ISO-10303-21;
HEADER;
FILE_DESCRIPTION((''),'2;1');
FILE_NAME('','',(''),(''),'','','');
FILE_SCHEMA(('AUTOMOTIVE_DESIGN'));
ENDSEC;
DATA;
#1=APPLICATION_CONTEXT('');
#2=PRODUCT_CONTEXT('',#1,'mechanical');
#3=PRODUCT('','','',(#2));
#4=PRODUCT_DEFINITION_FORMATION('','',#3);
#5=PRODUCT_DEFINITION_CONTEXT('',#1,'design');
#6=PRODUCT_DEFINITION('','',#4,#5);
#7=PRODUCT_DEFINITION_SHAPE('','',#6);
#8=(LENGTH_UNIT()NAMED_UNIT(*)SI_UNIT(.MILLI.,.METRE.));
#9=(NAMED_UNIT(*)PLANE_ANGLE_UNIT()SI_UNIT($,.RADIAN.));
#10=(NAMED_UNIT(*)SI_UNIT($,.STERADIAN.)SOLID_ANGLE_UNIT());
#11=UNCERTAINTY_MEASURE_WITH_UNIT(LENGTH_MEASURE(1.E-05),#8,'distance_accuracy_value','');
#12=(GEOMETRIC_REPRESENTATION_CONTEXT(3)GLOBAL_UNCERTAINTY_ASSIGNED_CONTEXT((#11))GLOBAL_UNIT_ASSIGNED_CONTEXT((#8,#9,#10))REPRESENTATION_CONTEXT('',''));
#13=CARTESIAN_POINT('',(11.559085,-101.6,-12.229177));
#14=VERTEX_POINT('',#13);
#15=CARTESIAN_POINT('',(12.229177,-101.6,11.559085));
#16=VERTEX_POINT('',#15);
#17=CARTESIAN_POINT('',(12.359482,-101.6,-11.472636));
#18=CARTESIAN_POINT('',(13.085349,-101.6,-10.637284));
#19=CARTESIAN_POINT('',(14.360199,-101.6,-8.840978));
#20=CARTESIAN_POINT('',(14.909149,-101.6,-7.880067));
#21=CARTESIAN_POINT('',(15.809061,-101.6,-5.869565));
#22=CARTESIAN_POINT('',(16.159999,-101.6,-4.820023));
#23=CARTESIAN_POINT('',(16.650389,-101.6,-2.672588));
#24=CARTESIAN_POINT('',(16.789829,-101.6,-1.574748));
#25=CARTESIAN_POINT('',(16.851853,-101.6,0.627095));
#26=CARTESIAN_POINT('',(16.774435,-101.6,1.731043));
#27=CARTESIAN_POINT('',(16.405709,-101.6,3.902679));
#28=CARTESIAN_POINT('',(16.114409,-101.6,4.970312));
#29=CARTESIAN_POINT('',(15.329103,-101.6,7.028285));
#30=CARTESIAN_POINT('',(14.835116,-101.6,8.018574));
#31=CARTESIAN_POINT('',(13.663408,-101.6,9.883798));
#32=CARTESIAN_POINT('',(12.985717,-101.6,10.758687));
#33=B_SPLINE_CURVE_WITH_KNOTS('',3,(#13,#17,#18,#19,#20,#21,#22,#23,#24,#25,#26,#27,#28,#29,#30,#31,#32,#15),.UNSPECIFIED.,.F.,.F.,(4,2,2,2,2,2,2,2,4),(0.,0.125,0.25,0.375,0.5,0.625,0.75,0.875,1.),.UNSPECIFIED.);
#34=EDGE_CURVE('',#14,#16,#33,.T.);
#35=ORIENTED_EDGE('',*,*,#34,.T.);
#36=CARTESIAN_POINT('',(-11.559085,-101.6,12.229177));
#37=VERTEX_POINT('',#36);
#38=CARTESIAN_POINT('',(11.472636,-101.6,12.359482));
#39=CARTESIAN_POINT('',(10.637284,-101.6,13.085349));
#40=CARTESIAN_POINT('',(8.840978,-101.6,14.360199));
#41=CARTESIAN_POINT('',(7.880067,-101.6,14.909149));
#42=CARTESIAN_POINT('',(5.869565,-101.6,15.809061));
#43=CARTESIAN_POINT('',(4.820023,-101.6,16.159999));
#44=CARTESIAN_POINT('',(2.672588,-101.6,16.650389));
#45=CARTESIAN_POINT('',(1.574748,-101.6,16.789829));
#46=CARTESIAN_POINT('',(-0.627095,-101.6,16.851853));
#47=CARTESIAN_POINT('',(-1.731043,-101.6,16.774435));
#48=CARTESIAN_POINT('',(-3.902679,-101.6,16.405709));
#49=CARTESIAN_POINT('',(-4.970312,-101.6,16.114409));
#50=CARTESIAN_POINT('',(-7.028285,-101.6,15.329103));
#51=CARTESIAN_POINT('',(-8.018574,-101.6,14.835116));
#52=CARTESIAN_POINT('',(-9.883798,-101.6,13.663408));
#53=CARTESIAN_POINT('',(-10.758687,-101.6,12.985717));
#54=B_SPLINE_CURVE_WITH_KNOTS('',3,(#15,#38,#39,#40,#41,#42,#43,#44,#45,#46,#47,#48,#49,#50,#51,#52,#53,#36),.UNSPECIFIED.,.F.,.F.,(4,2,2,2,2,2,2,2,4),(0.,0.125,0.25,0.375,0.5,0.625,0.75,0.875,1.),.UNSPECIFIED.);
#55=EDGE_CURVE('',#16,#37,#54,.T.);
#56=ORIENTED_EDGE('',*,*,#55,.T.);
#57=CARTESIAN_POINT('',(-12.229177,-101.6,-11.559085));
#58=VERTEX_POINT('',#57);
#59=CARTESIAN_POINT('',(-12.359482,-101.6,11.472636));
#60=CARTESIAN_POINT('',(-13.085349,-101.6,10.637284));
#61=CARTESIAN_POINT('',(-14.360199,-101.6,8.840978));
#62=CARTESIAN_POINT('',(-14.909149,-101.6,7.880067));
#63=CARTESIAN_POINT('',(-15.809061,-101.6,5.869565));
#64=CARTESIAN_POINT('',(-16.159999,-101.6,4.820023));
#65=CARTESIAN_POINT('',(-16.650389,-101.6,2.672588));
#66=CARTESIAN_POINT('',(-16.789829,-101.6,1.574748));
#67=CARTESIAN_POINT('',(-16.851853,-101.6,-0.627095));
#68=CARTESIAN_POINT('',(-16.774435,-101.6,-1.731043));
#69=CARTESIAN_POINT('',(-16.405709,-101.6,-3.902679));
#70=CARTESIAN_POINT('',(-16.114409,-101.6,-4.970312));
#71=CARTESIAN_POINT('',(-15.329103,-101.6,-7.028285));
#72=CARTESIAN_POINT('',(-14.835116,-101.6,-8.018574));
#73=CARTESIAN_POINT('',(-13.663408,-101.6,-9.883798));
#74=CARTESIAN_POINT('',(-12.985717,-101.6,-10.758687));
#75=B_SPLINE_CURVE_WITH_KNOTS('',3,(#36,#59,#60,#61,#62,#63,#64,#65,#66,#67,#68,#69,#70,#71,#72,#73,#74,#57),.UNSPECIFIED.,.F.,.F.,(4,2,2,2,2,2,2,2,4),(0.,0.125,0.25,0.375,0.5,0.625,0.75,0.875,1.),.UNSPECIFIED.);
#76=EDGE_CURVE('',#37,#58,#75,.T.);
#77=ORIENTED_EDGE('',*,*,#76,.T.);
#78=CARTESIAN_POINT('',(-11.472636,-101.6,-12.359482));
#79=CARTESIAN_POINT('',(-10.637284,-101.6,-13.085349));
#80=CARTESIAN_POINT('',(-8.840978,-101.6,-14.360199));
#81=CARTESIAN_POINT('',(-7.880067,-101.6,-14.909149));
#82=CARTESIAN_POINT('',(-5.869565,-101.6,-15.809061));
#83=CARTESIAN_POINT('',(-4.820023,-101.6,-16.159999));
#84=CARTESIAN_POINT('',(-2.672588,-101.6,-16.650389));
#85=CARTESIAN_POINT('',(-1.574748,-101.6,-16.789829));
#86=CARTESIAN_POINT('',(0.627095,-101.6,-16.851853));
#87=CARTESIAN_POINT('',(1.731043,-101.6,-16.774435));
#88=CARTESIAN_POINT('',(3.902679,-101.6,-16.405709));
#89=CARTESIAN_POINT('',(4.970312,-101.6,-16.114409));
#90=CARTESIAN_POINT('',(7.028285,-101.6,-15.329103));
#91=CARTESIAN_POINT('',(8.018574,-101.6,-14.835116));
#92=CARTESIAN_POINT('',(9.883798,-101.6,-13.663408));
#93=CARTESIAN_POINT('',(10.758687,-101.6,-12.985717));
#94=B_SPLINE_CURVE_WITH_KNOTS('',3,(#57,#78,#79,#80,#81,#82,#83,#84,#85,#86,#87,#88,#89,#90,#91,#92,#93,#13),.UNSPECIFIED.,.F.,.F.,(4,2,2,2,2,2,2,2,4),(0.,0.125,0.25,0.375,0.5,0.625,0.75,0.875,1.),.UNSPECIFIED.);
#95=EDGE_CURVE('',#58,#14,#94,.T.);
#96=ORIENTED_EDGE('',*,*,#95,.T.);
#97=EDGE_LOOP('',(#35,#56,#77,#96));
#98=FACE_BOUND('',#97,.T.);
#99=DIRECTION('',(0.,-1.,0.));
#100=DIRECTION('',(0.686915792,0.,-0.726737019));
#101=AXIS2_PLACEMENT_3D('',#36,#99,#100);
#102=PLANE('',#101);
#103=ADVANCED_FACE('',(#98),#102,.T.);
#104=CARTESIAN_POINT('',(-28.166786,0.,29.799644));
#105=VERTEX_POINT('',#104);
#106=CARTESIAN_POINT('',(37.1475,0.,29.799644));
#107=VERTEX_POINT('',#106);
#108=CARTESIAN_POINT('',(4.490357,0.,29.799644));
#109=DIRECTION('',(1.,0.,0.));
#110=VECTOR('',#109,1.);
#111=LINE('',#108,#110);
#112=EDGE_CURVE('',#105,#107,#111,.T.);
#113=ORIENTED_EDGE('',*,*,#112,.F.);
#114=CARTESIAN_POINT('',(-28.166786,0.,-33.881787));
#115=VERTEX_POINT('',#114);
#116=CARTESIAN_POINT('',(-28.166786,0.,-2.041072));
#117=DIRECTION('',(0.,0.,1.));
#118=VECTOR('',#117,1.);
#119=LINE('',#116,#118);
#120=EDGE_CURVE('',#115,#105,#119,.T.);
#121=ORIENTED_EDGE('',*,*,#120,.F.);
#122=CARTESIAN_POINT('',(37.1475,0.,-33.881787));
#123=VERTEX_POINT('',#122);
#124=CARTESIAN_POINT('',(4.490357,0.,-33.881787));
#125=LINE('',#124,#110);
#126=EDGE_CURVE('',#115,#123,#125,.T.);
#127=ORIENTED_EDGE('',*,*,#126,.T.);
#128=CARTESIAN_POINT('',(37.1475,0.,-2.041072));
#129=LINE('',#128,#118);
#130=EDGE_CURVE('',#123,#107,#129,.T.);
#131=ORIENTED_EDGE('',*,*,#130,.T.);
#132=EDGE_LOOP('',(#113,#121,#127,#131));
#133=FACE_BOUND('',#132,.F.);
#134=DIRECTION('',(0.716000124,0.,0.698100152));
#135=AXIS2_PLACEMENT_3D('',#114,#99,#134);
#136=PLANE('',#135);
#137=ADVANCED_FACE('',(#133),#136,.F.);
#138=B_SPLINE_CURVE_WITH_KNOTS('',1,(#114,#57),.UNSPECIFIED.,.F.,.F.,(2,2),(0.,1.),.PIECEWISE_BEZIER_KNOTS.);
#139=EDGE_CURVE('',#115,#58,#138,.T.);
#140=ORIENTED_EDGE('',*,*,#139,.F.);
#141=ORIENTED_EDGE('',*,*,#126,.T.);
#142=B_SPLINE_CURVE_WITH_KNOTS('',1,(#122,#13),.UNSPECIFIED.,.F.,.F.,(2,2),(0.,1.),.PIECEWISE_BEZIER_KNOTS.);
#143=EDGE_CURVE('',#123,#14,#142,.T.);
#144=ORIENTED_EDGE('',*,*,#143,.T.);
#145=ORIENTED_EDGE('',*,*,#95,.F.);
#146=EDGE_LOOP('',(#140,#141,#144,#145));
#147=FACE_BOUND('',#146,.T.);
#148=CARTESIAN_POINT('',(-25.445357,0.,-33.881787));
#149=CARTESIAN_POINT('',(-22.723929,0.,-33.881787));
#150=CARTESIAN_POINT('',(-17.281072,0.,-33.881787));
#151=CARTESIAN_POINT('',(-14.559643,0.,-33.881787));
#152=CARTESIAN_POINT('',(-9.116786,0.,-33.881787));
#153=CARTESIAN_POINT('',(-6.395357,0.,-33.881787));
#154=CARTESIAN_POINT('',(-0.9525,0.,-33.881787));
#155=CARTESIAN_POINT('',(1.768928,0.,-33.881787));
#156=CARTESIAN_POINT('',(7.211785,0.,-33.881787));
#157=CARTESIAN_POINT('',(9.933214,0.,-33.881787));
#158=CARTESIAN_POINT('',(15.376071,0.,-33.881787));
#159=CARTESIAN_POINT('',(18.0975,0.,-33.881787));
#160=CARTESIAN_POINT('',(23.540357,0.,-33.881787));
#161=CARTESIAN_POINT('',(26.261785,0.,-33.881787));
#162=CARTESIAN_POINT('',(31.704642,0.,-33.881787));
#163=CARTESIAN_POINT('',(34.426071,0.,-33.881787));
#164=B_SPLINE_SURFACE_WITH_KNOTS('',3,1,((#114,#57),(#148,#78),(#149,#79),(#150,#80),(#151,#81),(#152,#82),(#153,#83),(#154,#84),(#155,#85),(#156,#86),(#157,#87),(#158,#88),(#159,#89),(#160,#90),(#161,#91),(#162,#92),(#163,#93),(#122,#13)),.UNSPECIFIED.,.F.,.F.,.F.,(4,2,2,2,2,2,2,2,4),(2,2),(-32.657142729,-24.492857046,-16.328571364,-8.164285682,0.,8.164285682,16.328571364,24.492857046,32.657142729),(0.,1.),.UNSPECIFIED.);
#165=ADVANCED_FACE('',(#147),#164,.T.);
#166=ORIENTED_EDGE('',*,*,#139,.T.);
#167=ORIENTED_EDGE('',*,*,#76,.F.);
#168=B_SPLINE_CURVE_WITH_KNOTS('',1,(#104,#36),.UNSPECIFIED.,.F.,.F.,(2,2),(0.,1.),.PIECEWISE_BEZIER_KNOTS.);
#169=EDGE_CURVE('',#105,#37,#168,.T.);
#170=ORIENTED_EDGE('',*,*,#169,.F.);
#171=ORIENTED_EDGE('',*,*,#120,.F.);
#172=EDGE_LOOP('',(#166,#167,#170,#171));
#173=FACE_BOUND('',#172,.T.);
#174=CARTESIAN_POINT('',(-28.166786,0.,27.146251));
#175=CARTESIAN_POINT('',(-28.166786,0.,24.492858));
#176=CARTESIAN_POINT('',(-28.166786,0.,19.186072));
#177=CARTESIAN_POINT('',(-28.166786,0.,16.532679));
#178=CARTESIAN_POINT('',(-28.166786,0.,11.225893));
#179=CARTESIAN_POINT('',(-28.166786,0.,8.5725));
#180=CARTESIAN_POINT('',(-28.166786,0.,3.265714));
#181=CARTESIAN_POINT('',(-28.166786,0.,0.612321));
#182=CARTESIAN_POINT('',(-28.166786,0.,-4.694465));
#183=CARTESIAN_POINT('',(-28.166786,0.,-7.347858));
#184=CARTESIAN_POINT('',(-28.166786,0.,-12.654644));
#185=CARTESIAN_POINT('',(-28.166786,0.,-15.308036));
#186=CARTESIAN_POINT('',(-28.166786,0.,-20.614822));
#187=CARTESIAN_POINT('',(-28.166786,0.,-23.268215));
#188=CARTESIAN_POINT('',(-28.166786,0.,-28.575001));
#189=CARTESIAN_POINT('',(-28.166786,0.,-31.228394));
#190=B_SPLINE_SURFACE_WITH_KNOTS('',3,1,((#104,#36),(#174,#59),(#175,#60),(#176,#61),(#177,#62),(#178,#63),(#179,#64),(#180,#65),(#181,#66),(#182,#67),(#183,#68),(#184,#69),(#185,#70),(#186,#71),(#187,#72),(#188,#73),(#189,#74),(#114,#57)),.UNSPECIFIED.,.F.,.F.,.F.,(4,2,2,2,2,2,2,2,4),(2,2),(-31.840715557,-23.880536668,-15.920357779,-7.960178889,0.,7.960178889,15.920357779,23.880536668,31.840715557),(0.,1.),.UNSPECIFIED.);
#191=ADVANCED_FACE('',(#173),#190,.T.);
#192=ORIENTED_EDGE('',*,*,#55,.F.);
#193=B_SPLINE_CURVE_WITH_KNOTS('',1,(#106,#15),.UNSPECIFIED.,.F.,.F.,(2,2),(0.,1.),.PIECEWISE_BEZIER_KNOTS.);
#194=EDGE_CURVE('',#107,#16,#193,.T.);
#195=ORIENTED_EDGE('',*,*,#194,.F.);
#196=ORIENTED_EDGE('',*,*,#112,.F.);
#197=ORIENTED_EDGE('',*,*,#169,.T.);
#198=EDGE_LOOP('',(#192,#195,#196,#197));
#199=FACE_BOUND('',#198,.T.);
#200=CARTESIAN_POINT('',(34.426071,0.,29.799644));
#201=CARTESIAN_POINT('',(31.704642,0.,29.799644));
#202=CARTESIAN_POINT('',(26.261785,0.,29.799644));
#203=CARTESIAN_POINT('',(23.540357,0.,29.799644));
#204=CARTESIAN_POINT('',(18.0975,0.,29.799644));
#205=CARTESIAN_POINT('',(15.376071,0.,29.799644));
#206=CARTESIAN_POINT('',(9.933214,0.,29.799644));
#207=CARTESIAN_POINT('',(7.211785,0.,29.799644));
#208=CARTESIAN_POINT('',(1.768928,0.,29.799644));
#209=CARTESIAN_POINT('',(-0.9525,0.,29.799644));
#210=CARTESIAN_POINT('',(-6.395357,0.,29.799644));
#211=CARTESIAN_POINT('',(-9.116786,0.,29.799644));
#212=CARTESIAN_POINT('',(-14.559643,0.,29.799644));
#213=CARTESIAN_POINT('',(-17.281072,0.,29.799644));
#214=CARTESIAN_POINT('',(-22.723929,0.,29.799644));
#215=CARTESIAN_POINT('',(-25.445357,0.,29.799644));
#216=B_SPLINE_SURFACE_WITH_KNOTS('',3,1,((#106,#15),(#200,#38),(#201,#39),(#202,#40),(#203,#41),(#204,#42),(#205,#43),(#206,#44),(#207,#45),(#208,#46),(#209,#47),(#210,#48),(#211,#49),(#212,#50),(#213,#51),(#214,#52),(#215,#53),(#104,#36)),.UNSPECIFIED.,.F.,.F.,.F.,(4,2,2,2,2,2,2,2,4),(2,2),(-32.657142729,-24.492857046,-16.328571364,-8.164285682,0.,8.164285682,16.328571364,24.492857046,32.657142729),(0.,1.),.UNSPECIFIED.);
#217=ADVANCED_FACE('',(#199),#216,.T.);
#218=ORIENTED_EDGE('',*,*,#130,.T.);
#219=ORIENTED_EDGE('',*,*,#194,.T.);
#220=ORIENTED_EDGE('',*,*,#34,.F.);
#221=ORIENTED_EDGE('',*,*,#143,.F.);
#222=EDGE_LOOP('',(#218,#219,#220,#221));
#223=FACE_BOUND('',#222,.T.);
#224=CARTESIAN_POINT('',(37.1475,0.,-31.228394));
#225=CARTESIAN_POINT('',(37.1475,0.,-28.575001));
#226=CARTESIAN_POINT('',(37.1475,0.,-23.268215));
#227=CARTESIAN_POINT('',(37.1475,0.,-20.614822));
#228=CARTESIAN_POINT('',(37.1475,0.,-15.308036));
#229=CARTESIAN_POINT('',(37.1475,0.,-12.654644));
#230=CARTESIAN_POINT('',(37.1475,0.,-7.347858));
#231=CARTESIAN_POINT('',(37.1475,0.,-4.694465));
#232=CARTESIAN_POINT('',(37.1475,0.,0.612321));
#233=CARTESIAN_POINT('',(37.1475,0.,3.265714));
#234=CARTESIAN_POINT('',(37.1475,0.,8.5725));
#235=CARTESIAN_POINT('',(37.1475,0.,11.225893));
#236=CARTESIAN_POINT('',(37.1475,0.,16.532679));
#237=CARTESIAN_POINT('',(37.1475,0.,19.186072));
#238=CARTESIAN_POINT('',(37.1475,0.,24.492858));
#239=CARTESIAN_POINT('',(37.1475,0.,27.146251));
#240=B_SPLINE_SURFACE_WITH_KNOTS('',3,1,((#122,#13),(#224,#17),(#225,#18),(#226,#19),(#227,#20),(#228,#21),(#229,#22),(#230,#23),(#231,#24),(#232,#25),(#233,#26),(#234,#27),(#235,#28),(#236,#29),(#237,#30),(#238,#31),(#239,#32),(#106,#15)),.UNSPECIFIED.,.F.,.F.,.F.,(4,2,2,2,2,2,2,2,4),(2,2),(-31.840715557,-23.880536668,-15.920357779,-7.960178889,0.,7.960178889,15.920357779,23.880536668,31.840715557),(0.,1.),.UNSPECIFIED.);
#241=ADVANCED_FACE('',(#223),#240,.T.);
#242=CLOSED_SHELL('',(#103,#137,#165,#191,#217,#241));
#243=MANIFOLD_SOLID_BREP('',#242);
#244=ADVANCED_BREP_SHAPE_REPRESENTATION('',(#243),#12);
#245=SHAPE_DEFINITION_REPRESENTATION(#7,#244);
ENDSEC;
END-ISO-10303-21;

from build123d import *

# Parameters (mm, degrees)
F0_W = 65.3142854571
F0_H = 63.6814311147


# Not quite as in the source:
# - the arcs of a loft's sections are written as splines that run evenly, so that the points pair up as in the source's solid


with BuildPart() as f3:
    # F0 (on Front) → F3 section 0
    with BuildSketch(Plane.XZ):
        with Locations((4.4903568923, -2.0410716534)):
            Rectangle(F0_W, F0_H)
    # F2 (on offset) → F3 section 1
    with BuildSketch(Plane.XZ.offset(101.6)):
        with BuildLine():
            add(Edge.make_bspline(
                [(-11.5590845015, 12.2291767334), (-12.3594822471, 11.4726364219), (-13.0853493267, 10.6372844694), (-14.3601985952, 8.8409775584), (-14.909149261, 7.8800670172), (-15.8090605647, 5.8695648855), (-16.1599989505, 4.8200230087), (-16.6503892025, 2.6725881258), (-16.7898289428, 1.5747482191), (-16.8518527208, -0.6270946969), (-16.7744352248, -1.7310432614), (-16.4057089898, -3.902678622), (-16.1144093683, -4.9703117201), (-15.3291030627, -7.0282847963), (-14.8351157968, -8.0185738869), (-13.6634083015, -9.8837979274), (-12.9857170449, -10.758686756), (-12.2291767334, -11.5590845015)],
                knots=[0, 0, 0, 0, 0.125, 0.125, 0.25, 0.25, 0.375, 0.375, 0.5, 0.5, 0.625, 0.625, 0.75, 0.75, 0.875, 0.875, 1, 1, 1, 1], degree=3))
            add(Edge.make_bspline(
                [(-12.2291767334, -11.5590845015), (-11.4726364219, -12.3594822471), (-10.6372844694, -13.0853493267), (-8.8409775584, -14.3601985952), (-7.8800670172, -14.909149261), (-5.8695648855, -15.8090605647), (-4.8200230087, -16.1599989505), (-2.6725881258, -16.6503892025), (-1.5747482191, -16.7898289428), (0.6270946969, -16.8518527208), (1.7310432614, -16.7744352248), (3.902678622, -16.4057089898), (4.9703117201, -16.1144093683), (7.0282847963, -15.3291030627), (8.0185738869, -14.8351157968), (9.8837979274, -13.6634083015), (10.758686756, -12.9857170449), (11.5590845015, -12.2291767334)],
                knots=[0, 0, 0, 0, 0.125, 0.125, 0.25, 0.25, 0.375, 0.375, 0.5, 0.5, 0.625, 0.625, 0.75, 0.75, 0.875, 0.875, 1, 1, 1, 1], degree=3))
            add(Edge.make_bspline(
                [(11.5590845015, -12.2291767334), (12.3594822471, -11.4726364219), (13.0853493267, -10.6372844694), (14.3601985952, -8.8409775584), (14.909149261, -7.8800670172), (15.8090605647, -5.8695648855), (16.1599989505, -4.8200230087), (16.6503892025, -2.6725881258), (16.7898289428, -1.5747482191), (16.8518527208, 0.6270946969), (16.7744352248, 1.7310432614), (16.4057089898, 3.902678622), (16.1144093683, 4.9703117201), (15.3291030627, 7.0282847963), (14.8351157968, 8.0185738869), (13.6634083015, 9.8837979274), (12.9857170449, 10.758686756), (12.2291767334, 11.5590845015)],
                knots=[0, 0, 0, 0, 0.125, 0.125, 0.25, 0.25, 0.375, 0.375, 0.5, 0.5, 0.625, 0.625, 0.75, 0.75, 0.875, 0.875, 1, 1, 1, 1], degree=3))
            add(Edge.make_bspline(
                [(12.2291767334, 11.5590845015), (11.4726364219, 12.3594822471), (10.6372844694, 13.0853493267), (8.8409775584, 14.3601985952), (7.8800670172, 14.909149261), (5.8695648855, 15.8090605647), (4.8200230087, 16.1599989505), (2.6725881258, 16.6503892025), (1.5747482191, 16.7898289428), (-0.6270946969, 16.8518527208), (-1.7310432614, 16.7744352248), (-3.902678622, 16.4057089898), (-4.9703117201, 16.1144093683), (-7.0282847963, 15.3291030627), (-8.0185738869, 14.8351157968), (-9.8837979274, 13.6634083015), (-10.758686756, 12.9857170449), (-11.5590845015, 12.2291767334)],
                knots=[0, 0, 0, 0, 0.125, 0.125, 0.25, 0.25, 0.375, 0.375, 0.5, 0.5, 0.625, 0.625, 0.75, 0.75, 0.875, 0.875, 1, 1, 1, 1], degree=3))
        make_face()
    loft(ruled=True)


solid = f3.part
